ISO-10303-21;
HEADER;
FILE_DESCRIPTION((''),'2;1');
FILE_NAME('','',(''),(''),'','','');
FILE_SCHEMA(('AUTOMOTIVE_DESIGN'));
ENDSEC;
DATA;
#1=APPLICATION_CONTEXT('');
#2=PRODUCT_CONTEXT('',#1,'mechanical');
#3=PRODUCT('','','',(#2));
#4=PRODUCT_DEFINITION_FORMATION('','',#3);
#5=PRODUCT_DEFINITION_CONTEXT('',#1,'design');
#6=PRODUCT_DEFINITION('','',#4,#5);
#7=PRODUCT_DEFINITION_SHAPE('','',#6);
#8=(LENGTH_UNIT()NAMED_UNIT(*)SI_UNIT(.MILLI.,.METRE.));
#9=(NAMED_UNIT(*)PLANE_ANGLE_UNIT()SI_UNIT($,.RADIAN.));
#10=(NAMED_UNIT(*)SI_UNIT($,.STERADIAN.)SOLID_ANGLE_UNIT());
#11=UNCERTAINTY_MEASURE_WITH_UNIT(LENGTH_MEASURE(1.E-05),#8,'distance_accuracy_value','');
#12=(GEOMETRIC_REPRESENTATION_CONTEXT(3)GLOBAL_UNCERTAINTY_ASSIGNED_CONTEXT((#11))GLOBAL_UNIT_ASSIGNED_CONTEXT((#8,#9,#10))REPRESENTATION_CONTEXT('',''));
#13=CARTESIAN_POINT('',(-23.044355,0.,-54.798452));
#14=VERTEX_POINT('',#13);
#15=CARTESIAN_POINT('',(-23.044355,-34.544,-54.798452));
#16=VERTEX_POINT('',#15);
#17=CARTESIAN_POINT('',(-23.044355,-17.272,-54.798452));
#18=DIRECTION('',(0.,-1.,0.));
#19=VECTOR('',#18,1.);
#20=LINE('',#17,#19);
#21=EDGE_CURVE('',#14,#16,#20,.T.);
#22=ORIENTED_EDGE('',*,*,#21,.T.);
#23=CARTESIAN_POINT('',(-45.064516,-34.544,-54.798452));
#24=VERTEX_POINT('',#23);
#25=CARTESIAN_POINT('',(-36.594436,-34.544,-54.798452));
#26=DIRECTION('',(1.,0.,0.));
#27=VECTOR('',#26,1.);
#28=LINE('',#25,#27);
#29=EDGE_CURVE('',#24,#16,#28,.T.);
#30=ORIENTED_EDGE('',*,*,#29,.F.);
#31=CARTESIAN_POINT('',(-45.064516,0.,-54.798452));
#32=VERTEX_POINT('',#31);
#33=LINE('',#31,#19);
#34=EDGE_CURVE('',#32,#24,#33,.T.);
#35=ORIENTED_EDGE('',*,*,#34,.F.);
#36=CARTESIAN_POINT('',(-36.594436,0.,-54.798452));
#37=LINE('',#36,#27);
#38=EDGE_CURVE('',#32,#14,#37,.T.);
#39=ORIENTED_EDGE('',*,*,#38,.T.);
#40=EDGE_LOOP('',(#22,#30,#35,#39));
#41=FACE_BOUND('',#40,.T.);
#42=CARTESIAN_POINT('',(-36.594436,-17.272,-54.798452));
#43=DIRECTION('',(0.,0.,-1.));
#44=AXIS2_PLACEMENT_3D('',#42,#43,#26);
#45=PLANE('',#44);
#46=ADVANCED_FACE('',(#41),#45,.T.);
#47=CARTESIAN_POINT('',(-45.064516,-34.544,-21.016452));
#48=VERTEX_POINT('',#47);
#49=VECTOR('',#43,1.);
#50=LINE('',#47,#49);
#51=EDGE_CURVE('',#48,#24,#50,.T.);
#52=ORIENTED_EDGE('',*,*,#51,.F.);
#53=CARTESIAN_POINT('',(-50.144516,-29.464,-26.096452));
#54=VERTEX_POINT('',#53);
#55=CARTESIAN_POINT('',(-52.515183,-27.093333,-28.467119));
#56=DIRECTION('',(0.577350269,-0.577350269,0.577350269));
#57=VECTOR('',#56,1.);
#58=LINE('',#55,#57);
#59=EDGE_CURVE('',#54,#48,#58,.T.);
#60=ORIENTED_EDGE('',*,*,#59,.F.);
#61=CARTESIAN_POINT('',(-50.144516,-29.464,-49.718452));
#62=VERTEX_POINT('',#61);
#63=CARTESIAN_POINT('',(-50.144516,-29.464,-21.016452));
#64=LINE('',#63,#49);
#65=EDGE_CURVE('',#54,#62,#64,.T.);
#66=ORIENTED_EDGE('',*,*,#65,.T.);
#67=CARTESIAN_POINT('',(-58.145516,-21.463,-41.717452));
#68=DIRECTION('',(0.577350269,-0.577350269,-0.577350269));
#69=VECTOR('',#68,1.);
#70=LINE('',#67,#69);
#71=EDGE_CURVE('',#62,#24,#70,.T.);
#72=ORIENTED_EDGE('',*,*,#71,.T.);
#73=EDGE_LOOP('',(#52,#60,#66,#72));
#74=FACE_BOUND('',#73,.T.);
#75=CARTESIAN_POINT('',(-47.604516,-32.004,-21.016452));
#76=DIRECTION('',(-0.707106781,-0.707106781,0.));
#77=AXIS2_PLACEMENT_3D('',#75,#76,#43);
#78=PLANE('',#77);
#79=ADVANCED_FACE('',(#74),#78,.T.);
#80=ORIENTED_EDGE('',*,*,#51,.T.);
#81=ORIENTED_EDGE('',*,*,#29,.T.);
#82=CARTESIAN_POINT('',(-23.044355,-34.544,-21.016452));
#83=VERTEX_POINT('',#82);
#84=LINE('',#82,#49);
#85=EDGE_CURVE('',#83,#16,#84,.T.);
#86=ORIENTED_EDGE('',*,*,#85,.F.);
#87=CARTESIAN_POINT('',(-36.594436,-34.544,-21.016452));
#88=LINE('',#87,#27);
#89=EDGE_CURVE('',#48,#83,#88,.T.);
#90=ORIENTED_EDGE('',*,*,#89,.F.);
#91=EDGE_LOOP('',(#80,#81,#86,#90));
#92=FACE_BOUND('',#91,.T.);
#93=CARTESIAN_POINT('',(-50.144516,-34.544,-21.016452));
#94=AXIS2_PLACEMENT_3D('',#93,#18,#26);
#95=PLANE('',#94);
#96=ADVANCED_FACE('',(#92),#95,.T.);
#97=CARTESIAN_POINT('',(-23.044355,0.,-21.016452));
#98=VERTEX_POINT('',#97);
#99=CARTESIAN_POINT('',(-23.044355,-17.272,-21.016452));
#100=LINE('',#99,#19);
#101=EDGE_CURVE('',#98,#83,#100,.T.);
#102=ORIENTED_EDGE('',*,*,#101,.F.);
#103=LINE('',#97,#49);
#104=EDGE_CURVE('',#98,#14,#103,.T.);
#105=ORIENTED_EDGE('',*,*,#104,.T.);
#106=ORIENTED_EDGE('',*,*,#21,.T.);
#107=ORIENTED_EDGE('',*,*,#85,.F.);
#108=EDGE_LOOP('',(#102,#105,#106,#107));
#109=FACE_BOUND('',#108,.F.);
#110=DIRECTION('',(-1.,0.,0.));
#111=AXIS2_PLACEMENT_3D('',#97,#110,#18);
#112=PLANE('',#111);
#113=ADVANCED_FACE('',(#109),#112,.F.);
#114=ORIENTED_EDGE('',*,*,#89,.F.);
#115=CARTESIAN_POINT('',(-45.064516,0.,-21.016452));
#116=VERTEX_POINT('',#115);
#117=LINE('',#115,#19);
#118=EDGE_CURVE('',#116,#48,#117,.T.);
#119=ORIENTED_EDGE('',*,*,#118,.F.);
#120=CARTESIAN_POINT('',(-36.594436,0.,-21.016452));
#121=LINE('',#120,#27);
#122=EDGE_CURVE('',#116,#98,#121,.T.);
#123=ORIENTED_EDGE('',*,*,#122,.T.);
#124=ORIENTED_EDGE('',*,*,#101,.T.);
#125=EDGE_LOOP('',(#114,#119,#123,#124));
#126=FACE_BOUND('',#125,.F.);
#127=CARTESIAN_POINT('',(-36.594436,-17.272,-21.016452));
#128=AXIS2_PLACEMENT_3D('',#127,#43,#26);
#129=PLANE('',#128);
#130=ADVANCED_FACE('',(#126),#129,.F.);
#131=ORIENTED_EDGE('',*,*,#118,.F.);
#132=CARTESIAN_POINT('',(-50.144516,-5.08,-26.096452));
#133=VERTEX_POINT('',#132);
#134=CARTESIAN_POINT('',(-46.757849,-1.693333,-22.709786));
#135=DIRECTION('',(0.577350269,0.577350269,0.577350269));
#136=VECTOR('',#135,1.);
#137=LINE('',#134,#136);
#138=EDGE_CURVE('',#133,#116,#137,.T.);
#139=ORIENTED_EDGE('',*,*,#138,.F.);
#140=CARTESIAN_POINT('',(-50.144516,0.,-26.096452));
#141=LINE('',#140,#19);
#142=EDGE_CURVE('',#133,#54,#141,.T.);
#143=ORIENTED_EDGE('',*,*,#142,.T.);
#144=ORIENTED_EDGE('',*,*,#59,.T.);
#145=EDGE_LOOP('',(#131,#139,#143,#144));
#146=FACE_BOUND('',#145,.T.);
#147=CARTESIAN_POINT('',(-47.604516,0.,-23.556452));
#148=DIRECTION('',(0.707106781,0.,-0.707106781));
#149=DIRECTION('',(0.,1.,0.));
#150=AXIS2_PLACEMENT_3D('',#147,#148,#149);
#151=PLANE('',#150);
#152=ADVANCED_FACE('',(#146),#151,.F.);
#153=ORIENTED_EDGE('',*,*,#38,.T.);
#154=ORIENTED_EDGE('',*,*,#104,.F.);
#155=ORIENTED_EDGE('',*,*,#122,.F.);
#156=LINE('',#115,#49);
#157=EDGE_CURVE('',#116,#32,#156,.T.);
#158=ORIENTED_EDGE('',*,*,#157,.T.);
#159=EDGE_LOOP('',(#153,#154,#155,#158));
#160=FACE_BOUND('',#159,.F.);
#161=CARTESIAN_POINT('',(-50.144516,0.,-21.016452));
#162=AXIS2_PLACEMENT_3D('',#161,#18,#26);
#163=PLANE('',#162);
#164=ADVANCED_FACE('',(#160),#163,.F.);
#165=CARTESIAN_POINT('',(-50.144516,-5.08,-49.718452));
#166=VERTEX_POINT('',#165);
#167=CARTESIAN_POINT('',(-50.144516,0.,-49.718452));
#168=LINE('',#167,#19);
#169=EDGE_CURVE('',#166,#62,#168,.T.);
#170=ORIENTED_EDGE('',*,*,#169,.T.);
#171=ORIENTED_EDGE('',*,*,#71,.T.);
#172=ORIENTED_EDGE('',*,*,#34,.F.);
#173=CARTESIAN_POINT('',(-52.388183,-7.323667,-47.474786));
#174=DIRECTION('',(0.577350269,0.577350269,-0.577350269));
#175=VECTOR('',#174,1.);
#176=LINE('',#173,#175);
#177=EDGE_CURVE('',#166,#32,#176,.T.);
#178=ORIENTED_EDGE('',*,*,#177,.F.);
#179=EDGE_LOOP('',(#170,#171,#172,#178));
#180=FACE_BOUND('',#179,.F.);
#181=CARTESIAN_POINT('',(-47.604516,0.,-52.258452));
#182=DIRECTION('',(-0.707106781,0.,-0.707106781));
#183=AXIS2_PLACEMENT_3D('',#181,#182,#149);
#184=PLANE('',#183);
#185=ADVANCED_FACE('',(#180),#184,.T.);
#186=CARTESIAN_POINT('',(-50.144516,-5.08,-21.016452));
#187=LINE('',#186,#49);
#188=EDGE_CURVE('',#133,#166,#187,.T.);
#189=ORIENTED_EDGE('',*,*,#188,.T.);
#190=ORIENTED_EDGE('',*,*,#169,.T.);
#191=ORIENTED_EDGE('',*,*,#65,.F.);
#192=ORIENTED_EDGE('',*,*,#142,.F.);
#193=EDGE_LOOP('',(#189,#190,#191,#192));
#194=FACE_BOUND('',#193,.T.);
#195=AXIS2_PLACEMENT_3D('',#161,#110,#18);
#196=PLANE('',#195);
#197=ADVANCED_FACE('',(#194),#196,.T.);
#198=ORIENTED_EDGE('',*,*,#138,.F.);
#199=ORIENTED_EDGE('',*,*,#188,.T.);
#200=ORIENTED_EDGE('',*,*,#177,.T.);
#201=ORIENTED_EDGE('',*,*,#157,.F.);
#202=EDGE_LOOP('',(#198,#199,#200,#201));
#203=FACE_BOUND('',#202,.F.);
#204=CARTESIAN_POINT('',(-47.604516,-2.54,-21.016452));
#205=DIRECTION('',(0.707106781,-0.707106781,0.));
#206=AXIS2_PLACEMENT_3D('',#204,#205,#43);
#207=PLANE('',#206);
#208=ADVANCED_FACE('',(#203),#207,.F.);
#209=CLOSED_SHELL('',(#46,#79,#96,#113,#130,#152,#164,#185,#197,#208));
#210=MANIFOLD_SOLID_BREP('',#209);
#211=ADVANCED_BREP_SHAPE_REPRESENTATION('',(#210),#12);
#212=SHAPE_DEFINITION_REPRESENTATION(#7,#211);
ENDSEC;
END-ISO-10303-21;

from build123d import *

# Parameters (mm, degrees)
F1_E0_BOTTOM_W = 27.100160718
F1_E0_BOTTOM_H = 34.544
F2_DEPTH       = 33.782
F3_SIZE        = 5.08


with BuildPart() as f2:
    # F1_E0_bottom (on explicit) → F2 (new body)
    with BuildSketch(Plane(origin=(-50.1445159316, 0, -21.0164524615), x_dir=(1, 0, 0), z_dir=(0, 0, -1))):
        with Locations((13.550080359, 17.272)):
            Rectangle(F1_E0_BOTTOM_W, F1_E0_BOTTOM_H)
    extrude(amount=F2_DEPTH)

    # F3
    f3_edges = [f2.edges().sort_by_distance(p)[0] for p in [
        (-50.144516, -34.544, -37.907452),
        (-50.144516, 0, -37.907452),
        (-50.144516, -17.272, -21.016452),
        (-50.144516, -17.272, -54.798452),
    ]]
    chamfer(f3_edges, length=F3_SIZE)


solid = f2.part
